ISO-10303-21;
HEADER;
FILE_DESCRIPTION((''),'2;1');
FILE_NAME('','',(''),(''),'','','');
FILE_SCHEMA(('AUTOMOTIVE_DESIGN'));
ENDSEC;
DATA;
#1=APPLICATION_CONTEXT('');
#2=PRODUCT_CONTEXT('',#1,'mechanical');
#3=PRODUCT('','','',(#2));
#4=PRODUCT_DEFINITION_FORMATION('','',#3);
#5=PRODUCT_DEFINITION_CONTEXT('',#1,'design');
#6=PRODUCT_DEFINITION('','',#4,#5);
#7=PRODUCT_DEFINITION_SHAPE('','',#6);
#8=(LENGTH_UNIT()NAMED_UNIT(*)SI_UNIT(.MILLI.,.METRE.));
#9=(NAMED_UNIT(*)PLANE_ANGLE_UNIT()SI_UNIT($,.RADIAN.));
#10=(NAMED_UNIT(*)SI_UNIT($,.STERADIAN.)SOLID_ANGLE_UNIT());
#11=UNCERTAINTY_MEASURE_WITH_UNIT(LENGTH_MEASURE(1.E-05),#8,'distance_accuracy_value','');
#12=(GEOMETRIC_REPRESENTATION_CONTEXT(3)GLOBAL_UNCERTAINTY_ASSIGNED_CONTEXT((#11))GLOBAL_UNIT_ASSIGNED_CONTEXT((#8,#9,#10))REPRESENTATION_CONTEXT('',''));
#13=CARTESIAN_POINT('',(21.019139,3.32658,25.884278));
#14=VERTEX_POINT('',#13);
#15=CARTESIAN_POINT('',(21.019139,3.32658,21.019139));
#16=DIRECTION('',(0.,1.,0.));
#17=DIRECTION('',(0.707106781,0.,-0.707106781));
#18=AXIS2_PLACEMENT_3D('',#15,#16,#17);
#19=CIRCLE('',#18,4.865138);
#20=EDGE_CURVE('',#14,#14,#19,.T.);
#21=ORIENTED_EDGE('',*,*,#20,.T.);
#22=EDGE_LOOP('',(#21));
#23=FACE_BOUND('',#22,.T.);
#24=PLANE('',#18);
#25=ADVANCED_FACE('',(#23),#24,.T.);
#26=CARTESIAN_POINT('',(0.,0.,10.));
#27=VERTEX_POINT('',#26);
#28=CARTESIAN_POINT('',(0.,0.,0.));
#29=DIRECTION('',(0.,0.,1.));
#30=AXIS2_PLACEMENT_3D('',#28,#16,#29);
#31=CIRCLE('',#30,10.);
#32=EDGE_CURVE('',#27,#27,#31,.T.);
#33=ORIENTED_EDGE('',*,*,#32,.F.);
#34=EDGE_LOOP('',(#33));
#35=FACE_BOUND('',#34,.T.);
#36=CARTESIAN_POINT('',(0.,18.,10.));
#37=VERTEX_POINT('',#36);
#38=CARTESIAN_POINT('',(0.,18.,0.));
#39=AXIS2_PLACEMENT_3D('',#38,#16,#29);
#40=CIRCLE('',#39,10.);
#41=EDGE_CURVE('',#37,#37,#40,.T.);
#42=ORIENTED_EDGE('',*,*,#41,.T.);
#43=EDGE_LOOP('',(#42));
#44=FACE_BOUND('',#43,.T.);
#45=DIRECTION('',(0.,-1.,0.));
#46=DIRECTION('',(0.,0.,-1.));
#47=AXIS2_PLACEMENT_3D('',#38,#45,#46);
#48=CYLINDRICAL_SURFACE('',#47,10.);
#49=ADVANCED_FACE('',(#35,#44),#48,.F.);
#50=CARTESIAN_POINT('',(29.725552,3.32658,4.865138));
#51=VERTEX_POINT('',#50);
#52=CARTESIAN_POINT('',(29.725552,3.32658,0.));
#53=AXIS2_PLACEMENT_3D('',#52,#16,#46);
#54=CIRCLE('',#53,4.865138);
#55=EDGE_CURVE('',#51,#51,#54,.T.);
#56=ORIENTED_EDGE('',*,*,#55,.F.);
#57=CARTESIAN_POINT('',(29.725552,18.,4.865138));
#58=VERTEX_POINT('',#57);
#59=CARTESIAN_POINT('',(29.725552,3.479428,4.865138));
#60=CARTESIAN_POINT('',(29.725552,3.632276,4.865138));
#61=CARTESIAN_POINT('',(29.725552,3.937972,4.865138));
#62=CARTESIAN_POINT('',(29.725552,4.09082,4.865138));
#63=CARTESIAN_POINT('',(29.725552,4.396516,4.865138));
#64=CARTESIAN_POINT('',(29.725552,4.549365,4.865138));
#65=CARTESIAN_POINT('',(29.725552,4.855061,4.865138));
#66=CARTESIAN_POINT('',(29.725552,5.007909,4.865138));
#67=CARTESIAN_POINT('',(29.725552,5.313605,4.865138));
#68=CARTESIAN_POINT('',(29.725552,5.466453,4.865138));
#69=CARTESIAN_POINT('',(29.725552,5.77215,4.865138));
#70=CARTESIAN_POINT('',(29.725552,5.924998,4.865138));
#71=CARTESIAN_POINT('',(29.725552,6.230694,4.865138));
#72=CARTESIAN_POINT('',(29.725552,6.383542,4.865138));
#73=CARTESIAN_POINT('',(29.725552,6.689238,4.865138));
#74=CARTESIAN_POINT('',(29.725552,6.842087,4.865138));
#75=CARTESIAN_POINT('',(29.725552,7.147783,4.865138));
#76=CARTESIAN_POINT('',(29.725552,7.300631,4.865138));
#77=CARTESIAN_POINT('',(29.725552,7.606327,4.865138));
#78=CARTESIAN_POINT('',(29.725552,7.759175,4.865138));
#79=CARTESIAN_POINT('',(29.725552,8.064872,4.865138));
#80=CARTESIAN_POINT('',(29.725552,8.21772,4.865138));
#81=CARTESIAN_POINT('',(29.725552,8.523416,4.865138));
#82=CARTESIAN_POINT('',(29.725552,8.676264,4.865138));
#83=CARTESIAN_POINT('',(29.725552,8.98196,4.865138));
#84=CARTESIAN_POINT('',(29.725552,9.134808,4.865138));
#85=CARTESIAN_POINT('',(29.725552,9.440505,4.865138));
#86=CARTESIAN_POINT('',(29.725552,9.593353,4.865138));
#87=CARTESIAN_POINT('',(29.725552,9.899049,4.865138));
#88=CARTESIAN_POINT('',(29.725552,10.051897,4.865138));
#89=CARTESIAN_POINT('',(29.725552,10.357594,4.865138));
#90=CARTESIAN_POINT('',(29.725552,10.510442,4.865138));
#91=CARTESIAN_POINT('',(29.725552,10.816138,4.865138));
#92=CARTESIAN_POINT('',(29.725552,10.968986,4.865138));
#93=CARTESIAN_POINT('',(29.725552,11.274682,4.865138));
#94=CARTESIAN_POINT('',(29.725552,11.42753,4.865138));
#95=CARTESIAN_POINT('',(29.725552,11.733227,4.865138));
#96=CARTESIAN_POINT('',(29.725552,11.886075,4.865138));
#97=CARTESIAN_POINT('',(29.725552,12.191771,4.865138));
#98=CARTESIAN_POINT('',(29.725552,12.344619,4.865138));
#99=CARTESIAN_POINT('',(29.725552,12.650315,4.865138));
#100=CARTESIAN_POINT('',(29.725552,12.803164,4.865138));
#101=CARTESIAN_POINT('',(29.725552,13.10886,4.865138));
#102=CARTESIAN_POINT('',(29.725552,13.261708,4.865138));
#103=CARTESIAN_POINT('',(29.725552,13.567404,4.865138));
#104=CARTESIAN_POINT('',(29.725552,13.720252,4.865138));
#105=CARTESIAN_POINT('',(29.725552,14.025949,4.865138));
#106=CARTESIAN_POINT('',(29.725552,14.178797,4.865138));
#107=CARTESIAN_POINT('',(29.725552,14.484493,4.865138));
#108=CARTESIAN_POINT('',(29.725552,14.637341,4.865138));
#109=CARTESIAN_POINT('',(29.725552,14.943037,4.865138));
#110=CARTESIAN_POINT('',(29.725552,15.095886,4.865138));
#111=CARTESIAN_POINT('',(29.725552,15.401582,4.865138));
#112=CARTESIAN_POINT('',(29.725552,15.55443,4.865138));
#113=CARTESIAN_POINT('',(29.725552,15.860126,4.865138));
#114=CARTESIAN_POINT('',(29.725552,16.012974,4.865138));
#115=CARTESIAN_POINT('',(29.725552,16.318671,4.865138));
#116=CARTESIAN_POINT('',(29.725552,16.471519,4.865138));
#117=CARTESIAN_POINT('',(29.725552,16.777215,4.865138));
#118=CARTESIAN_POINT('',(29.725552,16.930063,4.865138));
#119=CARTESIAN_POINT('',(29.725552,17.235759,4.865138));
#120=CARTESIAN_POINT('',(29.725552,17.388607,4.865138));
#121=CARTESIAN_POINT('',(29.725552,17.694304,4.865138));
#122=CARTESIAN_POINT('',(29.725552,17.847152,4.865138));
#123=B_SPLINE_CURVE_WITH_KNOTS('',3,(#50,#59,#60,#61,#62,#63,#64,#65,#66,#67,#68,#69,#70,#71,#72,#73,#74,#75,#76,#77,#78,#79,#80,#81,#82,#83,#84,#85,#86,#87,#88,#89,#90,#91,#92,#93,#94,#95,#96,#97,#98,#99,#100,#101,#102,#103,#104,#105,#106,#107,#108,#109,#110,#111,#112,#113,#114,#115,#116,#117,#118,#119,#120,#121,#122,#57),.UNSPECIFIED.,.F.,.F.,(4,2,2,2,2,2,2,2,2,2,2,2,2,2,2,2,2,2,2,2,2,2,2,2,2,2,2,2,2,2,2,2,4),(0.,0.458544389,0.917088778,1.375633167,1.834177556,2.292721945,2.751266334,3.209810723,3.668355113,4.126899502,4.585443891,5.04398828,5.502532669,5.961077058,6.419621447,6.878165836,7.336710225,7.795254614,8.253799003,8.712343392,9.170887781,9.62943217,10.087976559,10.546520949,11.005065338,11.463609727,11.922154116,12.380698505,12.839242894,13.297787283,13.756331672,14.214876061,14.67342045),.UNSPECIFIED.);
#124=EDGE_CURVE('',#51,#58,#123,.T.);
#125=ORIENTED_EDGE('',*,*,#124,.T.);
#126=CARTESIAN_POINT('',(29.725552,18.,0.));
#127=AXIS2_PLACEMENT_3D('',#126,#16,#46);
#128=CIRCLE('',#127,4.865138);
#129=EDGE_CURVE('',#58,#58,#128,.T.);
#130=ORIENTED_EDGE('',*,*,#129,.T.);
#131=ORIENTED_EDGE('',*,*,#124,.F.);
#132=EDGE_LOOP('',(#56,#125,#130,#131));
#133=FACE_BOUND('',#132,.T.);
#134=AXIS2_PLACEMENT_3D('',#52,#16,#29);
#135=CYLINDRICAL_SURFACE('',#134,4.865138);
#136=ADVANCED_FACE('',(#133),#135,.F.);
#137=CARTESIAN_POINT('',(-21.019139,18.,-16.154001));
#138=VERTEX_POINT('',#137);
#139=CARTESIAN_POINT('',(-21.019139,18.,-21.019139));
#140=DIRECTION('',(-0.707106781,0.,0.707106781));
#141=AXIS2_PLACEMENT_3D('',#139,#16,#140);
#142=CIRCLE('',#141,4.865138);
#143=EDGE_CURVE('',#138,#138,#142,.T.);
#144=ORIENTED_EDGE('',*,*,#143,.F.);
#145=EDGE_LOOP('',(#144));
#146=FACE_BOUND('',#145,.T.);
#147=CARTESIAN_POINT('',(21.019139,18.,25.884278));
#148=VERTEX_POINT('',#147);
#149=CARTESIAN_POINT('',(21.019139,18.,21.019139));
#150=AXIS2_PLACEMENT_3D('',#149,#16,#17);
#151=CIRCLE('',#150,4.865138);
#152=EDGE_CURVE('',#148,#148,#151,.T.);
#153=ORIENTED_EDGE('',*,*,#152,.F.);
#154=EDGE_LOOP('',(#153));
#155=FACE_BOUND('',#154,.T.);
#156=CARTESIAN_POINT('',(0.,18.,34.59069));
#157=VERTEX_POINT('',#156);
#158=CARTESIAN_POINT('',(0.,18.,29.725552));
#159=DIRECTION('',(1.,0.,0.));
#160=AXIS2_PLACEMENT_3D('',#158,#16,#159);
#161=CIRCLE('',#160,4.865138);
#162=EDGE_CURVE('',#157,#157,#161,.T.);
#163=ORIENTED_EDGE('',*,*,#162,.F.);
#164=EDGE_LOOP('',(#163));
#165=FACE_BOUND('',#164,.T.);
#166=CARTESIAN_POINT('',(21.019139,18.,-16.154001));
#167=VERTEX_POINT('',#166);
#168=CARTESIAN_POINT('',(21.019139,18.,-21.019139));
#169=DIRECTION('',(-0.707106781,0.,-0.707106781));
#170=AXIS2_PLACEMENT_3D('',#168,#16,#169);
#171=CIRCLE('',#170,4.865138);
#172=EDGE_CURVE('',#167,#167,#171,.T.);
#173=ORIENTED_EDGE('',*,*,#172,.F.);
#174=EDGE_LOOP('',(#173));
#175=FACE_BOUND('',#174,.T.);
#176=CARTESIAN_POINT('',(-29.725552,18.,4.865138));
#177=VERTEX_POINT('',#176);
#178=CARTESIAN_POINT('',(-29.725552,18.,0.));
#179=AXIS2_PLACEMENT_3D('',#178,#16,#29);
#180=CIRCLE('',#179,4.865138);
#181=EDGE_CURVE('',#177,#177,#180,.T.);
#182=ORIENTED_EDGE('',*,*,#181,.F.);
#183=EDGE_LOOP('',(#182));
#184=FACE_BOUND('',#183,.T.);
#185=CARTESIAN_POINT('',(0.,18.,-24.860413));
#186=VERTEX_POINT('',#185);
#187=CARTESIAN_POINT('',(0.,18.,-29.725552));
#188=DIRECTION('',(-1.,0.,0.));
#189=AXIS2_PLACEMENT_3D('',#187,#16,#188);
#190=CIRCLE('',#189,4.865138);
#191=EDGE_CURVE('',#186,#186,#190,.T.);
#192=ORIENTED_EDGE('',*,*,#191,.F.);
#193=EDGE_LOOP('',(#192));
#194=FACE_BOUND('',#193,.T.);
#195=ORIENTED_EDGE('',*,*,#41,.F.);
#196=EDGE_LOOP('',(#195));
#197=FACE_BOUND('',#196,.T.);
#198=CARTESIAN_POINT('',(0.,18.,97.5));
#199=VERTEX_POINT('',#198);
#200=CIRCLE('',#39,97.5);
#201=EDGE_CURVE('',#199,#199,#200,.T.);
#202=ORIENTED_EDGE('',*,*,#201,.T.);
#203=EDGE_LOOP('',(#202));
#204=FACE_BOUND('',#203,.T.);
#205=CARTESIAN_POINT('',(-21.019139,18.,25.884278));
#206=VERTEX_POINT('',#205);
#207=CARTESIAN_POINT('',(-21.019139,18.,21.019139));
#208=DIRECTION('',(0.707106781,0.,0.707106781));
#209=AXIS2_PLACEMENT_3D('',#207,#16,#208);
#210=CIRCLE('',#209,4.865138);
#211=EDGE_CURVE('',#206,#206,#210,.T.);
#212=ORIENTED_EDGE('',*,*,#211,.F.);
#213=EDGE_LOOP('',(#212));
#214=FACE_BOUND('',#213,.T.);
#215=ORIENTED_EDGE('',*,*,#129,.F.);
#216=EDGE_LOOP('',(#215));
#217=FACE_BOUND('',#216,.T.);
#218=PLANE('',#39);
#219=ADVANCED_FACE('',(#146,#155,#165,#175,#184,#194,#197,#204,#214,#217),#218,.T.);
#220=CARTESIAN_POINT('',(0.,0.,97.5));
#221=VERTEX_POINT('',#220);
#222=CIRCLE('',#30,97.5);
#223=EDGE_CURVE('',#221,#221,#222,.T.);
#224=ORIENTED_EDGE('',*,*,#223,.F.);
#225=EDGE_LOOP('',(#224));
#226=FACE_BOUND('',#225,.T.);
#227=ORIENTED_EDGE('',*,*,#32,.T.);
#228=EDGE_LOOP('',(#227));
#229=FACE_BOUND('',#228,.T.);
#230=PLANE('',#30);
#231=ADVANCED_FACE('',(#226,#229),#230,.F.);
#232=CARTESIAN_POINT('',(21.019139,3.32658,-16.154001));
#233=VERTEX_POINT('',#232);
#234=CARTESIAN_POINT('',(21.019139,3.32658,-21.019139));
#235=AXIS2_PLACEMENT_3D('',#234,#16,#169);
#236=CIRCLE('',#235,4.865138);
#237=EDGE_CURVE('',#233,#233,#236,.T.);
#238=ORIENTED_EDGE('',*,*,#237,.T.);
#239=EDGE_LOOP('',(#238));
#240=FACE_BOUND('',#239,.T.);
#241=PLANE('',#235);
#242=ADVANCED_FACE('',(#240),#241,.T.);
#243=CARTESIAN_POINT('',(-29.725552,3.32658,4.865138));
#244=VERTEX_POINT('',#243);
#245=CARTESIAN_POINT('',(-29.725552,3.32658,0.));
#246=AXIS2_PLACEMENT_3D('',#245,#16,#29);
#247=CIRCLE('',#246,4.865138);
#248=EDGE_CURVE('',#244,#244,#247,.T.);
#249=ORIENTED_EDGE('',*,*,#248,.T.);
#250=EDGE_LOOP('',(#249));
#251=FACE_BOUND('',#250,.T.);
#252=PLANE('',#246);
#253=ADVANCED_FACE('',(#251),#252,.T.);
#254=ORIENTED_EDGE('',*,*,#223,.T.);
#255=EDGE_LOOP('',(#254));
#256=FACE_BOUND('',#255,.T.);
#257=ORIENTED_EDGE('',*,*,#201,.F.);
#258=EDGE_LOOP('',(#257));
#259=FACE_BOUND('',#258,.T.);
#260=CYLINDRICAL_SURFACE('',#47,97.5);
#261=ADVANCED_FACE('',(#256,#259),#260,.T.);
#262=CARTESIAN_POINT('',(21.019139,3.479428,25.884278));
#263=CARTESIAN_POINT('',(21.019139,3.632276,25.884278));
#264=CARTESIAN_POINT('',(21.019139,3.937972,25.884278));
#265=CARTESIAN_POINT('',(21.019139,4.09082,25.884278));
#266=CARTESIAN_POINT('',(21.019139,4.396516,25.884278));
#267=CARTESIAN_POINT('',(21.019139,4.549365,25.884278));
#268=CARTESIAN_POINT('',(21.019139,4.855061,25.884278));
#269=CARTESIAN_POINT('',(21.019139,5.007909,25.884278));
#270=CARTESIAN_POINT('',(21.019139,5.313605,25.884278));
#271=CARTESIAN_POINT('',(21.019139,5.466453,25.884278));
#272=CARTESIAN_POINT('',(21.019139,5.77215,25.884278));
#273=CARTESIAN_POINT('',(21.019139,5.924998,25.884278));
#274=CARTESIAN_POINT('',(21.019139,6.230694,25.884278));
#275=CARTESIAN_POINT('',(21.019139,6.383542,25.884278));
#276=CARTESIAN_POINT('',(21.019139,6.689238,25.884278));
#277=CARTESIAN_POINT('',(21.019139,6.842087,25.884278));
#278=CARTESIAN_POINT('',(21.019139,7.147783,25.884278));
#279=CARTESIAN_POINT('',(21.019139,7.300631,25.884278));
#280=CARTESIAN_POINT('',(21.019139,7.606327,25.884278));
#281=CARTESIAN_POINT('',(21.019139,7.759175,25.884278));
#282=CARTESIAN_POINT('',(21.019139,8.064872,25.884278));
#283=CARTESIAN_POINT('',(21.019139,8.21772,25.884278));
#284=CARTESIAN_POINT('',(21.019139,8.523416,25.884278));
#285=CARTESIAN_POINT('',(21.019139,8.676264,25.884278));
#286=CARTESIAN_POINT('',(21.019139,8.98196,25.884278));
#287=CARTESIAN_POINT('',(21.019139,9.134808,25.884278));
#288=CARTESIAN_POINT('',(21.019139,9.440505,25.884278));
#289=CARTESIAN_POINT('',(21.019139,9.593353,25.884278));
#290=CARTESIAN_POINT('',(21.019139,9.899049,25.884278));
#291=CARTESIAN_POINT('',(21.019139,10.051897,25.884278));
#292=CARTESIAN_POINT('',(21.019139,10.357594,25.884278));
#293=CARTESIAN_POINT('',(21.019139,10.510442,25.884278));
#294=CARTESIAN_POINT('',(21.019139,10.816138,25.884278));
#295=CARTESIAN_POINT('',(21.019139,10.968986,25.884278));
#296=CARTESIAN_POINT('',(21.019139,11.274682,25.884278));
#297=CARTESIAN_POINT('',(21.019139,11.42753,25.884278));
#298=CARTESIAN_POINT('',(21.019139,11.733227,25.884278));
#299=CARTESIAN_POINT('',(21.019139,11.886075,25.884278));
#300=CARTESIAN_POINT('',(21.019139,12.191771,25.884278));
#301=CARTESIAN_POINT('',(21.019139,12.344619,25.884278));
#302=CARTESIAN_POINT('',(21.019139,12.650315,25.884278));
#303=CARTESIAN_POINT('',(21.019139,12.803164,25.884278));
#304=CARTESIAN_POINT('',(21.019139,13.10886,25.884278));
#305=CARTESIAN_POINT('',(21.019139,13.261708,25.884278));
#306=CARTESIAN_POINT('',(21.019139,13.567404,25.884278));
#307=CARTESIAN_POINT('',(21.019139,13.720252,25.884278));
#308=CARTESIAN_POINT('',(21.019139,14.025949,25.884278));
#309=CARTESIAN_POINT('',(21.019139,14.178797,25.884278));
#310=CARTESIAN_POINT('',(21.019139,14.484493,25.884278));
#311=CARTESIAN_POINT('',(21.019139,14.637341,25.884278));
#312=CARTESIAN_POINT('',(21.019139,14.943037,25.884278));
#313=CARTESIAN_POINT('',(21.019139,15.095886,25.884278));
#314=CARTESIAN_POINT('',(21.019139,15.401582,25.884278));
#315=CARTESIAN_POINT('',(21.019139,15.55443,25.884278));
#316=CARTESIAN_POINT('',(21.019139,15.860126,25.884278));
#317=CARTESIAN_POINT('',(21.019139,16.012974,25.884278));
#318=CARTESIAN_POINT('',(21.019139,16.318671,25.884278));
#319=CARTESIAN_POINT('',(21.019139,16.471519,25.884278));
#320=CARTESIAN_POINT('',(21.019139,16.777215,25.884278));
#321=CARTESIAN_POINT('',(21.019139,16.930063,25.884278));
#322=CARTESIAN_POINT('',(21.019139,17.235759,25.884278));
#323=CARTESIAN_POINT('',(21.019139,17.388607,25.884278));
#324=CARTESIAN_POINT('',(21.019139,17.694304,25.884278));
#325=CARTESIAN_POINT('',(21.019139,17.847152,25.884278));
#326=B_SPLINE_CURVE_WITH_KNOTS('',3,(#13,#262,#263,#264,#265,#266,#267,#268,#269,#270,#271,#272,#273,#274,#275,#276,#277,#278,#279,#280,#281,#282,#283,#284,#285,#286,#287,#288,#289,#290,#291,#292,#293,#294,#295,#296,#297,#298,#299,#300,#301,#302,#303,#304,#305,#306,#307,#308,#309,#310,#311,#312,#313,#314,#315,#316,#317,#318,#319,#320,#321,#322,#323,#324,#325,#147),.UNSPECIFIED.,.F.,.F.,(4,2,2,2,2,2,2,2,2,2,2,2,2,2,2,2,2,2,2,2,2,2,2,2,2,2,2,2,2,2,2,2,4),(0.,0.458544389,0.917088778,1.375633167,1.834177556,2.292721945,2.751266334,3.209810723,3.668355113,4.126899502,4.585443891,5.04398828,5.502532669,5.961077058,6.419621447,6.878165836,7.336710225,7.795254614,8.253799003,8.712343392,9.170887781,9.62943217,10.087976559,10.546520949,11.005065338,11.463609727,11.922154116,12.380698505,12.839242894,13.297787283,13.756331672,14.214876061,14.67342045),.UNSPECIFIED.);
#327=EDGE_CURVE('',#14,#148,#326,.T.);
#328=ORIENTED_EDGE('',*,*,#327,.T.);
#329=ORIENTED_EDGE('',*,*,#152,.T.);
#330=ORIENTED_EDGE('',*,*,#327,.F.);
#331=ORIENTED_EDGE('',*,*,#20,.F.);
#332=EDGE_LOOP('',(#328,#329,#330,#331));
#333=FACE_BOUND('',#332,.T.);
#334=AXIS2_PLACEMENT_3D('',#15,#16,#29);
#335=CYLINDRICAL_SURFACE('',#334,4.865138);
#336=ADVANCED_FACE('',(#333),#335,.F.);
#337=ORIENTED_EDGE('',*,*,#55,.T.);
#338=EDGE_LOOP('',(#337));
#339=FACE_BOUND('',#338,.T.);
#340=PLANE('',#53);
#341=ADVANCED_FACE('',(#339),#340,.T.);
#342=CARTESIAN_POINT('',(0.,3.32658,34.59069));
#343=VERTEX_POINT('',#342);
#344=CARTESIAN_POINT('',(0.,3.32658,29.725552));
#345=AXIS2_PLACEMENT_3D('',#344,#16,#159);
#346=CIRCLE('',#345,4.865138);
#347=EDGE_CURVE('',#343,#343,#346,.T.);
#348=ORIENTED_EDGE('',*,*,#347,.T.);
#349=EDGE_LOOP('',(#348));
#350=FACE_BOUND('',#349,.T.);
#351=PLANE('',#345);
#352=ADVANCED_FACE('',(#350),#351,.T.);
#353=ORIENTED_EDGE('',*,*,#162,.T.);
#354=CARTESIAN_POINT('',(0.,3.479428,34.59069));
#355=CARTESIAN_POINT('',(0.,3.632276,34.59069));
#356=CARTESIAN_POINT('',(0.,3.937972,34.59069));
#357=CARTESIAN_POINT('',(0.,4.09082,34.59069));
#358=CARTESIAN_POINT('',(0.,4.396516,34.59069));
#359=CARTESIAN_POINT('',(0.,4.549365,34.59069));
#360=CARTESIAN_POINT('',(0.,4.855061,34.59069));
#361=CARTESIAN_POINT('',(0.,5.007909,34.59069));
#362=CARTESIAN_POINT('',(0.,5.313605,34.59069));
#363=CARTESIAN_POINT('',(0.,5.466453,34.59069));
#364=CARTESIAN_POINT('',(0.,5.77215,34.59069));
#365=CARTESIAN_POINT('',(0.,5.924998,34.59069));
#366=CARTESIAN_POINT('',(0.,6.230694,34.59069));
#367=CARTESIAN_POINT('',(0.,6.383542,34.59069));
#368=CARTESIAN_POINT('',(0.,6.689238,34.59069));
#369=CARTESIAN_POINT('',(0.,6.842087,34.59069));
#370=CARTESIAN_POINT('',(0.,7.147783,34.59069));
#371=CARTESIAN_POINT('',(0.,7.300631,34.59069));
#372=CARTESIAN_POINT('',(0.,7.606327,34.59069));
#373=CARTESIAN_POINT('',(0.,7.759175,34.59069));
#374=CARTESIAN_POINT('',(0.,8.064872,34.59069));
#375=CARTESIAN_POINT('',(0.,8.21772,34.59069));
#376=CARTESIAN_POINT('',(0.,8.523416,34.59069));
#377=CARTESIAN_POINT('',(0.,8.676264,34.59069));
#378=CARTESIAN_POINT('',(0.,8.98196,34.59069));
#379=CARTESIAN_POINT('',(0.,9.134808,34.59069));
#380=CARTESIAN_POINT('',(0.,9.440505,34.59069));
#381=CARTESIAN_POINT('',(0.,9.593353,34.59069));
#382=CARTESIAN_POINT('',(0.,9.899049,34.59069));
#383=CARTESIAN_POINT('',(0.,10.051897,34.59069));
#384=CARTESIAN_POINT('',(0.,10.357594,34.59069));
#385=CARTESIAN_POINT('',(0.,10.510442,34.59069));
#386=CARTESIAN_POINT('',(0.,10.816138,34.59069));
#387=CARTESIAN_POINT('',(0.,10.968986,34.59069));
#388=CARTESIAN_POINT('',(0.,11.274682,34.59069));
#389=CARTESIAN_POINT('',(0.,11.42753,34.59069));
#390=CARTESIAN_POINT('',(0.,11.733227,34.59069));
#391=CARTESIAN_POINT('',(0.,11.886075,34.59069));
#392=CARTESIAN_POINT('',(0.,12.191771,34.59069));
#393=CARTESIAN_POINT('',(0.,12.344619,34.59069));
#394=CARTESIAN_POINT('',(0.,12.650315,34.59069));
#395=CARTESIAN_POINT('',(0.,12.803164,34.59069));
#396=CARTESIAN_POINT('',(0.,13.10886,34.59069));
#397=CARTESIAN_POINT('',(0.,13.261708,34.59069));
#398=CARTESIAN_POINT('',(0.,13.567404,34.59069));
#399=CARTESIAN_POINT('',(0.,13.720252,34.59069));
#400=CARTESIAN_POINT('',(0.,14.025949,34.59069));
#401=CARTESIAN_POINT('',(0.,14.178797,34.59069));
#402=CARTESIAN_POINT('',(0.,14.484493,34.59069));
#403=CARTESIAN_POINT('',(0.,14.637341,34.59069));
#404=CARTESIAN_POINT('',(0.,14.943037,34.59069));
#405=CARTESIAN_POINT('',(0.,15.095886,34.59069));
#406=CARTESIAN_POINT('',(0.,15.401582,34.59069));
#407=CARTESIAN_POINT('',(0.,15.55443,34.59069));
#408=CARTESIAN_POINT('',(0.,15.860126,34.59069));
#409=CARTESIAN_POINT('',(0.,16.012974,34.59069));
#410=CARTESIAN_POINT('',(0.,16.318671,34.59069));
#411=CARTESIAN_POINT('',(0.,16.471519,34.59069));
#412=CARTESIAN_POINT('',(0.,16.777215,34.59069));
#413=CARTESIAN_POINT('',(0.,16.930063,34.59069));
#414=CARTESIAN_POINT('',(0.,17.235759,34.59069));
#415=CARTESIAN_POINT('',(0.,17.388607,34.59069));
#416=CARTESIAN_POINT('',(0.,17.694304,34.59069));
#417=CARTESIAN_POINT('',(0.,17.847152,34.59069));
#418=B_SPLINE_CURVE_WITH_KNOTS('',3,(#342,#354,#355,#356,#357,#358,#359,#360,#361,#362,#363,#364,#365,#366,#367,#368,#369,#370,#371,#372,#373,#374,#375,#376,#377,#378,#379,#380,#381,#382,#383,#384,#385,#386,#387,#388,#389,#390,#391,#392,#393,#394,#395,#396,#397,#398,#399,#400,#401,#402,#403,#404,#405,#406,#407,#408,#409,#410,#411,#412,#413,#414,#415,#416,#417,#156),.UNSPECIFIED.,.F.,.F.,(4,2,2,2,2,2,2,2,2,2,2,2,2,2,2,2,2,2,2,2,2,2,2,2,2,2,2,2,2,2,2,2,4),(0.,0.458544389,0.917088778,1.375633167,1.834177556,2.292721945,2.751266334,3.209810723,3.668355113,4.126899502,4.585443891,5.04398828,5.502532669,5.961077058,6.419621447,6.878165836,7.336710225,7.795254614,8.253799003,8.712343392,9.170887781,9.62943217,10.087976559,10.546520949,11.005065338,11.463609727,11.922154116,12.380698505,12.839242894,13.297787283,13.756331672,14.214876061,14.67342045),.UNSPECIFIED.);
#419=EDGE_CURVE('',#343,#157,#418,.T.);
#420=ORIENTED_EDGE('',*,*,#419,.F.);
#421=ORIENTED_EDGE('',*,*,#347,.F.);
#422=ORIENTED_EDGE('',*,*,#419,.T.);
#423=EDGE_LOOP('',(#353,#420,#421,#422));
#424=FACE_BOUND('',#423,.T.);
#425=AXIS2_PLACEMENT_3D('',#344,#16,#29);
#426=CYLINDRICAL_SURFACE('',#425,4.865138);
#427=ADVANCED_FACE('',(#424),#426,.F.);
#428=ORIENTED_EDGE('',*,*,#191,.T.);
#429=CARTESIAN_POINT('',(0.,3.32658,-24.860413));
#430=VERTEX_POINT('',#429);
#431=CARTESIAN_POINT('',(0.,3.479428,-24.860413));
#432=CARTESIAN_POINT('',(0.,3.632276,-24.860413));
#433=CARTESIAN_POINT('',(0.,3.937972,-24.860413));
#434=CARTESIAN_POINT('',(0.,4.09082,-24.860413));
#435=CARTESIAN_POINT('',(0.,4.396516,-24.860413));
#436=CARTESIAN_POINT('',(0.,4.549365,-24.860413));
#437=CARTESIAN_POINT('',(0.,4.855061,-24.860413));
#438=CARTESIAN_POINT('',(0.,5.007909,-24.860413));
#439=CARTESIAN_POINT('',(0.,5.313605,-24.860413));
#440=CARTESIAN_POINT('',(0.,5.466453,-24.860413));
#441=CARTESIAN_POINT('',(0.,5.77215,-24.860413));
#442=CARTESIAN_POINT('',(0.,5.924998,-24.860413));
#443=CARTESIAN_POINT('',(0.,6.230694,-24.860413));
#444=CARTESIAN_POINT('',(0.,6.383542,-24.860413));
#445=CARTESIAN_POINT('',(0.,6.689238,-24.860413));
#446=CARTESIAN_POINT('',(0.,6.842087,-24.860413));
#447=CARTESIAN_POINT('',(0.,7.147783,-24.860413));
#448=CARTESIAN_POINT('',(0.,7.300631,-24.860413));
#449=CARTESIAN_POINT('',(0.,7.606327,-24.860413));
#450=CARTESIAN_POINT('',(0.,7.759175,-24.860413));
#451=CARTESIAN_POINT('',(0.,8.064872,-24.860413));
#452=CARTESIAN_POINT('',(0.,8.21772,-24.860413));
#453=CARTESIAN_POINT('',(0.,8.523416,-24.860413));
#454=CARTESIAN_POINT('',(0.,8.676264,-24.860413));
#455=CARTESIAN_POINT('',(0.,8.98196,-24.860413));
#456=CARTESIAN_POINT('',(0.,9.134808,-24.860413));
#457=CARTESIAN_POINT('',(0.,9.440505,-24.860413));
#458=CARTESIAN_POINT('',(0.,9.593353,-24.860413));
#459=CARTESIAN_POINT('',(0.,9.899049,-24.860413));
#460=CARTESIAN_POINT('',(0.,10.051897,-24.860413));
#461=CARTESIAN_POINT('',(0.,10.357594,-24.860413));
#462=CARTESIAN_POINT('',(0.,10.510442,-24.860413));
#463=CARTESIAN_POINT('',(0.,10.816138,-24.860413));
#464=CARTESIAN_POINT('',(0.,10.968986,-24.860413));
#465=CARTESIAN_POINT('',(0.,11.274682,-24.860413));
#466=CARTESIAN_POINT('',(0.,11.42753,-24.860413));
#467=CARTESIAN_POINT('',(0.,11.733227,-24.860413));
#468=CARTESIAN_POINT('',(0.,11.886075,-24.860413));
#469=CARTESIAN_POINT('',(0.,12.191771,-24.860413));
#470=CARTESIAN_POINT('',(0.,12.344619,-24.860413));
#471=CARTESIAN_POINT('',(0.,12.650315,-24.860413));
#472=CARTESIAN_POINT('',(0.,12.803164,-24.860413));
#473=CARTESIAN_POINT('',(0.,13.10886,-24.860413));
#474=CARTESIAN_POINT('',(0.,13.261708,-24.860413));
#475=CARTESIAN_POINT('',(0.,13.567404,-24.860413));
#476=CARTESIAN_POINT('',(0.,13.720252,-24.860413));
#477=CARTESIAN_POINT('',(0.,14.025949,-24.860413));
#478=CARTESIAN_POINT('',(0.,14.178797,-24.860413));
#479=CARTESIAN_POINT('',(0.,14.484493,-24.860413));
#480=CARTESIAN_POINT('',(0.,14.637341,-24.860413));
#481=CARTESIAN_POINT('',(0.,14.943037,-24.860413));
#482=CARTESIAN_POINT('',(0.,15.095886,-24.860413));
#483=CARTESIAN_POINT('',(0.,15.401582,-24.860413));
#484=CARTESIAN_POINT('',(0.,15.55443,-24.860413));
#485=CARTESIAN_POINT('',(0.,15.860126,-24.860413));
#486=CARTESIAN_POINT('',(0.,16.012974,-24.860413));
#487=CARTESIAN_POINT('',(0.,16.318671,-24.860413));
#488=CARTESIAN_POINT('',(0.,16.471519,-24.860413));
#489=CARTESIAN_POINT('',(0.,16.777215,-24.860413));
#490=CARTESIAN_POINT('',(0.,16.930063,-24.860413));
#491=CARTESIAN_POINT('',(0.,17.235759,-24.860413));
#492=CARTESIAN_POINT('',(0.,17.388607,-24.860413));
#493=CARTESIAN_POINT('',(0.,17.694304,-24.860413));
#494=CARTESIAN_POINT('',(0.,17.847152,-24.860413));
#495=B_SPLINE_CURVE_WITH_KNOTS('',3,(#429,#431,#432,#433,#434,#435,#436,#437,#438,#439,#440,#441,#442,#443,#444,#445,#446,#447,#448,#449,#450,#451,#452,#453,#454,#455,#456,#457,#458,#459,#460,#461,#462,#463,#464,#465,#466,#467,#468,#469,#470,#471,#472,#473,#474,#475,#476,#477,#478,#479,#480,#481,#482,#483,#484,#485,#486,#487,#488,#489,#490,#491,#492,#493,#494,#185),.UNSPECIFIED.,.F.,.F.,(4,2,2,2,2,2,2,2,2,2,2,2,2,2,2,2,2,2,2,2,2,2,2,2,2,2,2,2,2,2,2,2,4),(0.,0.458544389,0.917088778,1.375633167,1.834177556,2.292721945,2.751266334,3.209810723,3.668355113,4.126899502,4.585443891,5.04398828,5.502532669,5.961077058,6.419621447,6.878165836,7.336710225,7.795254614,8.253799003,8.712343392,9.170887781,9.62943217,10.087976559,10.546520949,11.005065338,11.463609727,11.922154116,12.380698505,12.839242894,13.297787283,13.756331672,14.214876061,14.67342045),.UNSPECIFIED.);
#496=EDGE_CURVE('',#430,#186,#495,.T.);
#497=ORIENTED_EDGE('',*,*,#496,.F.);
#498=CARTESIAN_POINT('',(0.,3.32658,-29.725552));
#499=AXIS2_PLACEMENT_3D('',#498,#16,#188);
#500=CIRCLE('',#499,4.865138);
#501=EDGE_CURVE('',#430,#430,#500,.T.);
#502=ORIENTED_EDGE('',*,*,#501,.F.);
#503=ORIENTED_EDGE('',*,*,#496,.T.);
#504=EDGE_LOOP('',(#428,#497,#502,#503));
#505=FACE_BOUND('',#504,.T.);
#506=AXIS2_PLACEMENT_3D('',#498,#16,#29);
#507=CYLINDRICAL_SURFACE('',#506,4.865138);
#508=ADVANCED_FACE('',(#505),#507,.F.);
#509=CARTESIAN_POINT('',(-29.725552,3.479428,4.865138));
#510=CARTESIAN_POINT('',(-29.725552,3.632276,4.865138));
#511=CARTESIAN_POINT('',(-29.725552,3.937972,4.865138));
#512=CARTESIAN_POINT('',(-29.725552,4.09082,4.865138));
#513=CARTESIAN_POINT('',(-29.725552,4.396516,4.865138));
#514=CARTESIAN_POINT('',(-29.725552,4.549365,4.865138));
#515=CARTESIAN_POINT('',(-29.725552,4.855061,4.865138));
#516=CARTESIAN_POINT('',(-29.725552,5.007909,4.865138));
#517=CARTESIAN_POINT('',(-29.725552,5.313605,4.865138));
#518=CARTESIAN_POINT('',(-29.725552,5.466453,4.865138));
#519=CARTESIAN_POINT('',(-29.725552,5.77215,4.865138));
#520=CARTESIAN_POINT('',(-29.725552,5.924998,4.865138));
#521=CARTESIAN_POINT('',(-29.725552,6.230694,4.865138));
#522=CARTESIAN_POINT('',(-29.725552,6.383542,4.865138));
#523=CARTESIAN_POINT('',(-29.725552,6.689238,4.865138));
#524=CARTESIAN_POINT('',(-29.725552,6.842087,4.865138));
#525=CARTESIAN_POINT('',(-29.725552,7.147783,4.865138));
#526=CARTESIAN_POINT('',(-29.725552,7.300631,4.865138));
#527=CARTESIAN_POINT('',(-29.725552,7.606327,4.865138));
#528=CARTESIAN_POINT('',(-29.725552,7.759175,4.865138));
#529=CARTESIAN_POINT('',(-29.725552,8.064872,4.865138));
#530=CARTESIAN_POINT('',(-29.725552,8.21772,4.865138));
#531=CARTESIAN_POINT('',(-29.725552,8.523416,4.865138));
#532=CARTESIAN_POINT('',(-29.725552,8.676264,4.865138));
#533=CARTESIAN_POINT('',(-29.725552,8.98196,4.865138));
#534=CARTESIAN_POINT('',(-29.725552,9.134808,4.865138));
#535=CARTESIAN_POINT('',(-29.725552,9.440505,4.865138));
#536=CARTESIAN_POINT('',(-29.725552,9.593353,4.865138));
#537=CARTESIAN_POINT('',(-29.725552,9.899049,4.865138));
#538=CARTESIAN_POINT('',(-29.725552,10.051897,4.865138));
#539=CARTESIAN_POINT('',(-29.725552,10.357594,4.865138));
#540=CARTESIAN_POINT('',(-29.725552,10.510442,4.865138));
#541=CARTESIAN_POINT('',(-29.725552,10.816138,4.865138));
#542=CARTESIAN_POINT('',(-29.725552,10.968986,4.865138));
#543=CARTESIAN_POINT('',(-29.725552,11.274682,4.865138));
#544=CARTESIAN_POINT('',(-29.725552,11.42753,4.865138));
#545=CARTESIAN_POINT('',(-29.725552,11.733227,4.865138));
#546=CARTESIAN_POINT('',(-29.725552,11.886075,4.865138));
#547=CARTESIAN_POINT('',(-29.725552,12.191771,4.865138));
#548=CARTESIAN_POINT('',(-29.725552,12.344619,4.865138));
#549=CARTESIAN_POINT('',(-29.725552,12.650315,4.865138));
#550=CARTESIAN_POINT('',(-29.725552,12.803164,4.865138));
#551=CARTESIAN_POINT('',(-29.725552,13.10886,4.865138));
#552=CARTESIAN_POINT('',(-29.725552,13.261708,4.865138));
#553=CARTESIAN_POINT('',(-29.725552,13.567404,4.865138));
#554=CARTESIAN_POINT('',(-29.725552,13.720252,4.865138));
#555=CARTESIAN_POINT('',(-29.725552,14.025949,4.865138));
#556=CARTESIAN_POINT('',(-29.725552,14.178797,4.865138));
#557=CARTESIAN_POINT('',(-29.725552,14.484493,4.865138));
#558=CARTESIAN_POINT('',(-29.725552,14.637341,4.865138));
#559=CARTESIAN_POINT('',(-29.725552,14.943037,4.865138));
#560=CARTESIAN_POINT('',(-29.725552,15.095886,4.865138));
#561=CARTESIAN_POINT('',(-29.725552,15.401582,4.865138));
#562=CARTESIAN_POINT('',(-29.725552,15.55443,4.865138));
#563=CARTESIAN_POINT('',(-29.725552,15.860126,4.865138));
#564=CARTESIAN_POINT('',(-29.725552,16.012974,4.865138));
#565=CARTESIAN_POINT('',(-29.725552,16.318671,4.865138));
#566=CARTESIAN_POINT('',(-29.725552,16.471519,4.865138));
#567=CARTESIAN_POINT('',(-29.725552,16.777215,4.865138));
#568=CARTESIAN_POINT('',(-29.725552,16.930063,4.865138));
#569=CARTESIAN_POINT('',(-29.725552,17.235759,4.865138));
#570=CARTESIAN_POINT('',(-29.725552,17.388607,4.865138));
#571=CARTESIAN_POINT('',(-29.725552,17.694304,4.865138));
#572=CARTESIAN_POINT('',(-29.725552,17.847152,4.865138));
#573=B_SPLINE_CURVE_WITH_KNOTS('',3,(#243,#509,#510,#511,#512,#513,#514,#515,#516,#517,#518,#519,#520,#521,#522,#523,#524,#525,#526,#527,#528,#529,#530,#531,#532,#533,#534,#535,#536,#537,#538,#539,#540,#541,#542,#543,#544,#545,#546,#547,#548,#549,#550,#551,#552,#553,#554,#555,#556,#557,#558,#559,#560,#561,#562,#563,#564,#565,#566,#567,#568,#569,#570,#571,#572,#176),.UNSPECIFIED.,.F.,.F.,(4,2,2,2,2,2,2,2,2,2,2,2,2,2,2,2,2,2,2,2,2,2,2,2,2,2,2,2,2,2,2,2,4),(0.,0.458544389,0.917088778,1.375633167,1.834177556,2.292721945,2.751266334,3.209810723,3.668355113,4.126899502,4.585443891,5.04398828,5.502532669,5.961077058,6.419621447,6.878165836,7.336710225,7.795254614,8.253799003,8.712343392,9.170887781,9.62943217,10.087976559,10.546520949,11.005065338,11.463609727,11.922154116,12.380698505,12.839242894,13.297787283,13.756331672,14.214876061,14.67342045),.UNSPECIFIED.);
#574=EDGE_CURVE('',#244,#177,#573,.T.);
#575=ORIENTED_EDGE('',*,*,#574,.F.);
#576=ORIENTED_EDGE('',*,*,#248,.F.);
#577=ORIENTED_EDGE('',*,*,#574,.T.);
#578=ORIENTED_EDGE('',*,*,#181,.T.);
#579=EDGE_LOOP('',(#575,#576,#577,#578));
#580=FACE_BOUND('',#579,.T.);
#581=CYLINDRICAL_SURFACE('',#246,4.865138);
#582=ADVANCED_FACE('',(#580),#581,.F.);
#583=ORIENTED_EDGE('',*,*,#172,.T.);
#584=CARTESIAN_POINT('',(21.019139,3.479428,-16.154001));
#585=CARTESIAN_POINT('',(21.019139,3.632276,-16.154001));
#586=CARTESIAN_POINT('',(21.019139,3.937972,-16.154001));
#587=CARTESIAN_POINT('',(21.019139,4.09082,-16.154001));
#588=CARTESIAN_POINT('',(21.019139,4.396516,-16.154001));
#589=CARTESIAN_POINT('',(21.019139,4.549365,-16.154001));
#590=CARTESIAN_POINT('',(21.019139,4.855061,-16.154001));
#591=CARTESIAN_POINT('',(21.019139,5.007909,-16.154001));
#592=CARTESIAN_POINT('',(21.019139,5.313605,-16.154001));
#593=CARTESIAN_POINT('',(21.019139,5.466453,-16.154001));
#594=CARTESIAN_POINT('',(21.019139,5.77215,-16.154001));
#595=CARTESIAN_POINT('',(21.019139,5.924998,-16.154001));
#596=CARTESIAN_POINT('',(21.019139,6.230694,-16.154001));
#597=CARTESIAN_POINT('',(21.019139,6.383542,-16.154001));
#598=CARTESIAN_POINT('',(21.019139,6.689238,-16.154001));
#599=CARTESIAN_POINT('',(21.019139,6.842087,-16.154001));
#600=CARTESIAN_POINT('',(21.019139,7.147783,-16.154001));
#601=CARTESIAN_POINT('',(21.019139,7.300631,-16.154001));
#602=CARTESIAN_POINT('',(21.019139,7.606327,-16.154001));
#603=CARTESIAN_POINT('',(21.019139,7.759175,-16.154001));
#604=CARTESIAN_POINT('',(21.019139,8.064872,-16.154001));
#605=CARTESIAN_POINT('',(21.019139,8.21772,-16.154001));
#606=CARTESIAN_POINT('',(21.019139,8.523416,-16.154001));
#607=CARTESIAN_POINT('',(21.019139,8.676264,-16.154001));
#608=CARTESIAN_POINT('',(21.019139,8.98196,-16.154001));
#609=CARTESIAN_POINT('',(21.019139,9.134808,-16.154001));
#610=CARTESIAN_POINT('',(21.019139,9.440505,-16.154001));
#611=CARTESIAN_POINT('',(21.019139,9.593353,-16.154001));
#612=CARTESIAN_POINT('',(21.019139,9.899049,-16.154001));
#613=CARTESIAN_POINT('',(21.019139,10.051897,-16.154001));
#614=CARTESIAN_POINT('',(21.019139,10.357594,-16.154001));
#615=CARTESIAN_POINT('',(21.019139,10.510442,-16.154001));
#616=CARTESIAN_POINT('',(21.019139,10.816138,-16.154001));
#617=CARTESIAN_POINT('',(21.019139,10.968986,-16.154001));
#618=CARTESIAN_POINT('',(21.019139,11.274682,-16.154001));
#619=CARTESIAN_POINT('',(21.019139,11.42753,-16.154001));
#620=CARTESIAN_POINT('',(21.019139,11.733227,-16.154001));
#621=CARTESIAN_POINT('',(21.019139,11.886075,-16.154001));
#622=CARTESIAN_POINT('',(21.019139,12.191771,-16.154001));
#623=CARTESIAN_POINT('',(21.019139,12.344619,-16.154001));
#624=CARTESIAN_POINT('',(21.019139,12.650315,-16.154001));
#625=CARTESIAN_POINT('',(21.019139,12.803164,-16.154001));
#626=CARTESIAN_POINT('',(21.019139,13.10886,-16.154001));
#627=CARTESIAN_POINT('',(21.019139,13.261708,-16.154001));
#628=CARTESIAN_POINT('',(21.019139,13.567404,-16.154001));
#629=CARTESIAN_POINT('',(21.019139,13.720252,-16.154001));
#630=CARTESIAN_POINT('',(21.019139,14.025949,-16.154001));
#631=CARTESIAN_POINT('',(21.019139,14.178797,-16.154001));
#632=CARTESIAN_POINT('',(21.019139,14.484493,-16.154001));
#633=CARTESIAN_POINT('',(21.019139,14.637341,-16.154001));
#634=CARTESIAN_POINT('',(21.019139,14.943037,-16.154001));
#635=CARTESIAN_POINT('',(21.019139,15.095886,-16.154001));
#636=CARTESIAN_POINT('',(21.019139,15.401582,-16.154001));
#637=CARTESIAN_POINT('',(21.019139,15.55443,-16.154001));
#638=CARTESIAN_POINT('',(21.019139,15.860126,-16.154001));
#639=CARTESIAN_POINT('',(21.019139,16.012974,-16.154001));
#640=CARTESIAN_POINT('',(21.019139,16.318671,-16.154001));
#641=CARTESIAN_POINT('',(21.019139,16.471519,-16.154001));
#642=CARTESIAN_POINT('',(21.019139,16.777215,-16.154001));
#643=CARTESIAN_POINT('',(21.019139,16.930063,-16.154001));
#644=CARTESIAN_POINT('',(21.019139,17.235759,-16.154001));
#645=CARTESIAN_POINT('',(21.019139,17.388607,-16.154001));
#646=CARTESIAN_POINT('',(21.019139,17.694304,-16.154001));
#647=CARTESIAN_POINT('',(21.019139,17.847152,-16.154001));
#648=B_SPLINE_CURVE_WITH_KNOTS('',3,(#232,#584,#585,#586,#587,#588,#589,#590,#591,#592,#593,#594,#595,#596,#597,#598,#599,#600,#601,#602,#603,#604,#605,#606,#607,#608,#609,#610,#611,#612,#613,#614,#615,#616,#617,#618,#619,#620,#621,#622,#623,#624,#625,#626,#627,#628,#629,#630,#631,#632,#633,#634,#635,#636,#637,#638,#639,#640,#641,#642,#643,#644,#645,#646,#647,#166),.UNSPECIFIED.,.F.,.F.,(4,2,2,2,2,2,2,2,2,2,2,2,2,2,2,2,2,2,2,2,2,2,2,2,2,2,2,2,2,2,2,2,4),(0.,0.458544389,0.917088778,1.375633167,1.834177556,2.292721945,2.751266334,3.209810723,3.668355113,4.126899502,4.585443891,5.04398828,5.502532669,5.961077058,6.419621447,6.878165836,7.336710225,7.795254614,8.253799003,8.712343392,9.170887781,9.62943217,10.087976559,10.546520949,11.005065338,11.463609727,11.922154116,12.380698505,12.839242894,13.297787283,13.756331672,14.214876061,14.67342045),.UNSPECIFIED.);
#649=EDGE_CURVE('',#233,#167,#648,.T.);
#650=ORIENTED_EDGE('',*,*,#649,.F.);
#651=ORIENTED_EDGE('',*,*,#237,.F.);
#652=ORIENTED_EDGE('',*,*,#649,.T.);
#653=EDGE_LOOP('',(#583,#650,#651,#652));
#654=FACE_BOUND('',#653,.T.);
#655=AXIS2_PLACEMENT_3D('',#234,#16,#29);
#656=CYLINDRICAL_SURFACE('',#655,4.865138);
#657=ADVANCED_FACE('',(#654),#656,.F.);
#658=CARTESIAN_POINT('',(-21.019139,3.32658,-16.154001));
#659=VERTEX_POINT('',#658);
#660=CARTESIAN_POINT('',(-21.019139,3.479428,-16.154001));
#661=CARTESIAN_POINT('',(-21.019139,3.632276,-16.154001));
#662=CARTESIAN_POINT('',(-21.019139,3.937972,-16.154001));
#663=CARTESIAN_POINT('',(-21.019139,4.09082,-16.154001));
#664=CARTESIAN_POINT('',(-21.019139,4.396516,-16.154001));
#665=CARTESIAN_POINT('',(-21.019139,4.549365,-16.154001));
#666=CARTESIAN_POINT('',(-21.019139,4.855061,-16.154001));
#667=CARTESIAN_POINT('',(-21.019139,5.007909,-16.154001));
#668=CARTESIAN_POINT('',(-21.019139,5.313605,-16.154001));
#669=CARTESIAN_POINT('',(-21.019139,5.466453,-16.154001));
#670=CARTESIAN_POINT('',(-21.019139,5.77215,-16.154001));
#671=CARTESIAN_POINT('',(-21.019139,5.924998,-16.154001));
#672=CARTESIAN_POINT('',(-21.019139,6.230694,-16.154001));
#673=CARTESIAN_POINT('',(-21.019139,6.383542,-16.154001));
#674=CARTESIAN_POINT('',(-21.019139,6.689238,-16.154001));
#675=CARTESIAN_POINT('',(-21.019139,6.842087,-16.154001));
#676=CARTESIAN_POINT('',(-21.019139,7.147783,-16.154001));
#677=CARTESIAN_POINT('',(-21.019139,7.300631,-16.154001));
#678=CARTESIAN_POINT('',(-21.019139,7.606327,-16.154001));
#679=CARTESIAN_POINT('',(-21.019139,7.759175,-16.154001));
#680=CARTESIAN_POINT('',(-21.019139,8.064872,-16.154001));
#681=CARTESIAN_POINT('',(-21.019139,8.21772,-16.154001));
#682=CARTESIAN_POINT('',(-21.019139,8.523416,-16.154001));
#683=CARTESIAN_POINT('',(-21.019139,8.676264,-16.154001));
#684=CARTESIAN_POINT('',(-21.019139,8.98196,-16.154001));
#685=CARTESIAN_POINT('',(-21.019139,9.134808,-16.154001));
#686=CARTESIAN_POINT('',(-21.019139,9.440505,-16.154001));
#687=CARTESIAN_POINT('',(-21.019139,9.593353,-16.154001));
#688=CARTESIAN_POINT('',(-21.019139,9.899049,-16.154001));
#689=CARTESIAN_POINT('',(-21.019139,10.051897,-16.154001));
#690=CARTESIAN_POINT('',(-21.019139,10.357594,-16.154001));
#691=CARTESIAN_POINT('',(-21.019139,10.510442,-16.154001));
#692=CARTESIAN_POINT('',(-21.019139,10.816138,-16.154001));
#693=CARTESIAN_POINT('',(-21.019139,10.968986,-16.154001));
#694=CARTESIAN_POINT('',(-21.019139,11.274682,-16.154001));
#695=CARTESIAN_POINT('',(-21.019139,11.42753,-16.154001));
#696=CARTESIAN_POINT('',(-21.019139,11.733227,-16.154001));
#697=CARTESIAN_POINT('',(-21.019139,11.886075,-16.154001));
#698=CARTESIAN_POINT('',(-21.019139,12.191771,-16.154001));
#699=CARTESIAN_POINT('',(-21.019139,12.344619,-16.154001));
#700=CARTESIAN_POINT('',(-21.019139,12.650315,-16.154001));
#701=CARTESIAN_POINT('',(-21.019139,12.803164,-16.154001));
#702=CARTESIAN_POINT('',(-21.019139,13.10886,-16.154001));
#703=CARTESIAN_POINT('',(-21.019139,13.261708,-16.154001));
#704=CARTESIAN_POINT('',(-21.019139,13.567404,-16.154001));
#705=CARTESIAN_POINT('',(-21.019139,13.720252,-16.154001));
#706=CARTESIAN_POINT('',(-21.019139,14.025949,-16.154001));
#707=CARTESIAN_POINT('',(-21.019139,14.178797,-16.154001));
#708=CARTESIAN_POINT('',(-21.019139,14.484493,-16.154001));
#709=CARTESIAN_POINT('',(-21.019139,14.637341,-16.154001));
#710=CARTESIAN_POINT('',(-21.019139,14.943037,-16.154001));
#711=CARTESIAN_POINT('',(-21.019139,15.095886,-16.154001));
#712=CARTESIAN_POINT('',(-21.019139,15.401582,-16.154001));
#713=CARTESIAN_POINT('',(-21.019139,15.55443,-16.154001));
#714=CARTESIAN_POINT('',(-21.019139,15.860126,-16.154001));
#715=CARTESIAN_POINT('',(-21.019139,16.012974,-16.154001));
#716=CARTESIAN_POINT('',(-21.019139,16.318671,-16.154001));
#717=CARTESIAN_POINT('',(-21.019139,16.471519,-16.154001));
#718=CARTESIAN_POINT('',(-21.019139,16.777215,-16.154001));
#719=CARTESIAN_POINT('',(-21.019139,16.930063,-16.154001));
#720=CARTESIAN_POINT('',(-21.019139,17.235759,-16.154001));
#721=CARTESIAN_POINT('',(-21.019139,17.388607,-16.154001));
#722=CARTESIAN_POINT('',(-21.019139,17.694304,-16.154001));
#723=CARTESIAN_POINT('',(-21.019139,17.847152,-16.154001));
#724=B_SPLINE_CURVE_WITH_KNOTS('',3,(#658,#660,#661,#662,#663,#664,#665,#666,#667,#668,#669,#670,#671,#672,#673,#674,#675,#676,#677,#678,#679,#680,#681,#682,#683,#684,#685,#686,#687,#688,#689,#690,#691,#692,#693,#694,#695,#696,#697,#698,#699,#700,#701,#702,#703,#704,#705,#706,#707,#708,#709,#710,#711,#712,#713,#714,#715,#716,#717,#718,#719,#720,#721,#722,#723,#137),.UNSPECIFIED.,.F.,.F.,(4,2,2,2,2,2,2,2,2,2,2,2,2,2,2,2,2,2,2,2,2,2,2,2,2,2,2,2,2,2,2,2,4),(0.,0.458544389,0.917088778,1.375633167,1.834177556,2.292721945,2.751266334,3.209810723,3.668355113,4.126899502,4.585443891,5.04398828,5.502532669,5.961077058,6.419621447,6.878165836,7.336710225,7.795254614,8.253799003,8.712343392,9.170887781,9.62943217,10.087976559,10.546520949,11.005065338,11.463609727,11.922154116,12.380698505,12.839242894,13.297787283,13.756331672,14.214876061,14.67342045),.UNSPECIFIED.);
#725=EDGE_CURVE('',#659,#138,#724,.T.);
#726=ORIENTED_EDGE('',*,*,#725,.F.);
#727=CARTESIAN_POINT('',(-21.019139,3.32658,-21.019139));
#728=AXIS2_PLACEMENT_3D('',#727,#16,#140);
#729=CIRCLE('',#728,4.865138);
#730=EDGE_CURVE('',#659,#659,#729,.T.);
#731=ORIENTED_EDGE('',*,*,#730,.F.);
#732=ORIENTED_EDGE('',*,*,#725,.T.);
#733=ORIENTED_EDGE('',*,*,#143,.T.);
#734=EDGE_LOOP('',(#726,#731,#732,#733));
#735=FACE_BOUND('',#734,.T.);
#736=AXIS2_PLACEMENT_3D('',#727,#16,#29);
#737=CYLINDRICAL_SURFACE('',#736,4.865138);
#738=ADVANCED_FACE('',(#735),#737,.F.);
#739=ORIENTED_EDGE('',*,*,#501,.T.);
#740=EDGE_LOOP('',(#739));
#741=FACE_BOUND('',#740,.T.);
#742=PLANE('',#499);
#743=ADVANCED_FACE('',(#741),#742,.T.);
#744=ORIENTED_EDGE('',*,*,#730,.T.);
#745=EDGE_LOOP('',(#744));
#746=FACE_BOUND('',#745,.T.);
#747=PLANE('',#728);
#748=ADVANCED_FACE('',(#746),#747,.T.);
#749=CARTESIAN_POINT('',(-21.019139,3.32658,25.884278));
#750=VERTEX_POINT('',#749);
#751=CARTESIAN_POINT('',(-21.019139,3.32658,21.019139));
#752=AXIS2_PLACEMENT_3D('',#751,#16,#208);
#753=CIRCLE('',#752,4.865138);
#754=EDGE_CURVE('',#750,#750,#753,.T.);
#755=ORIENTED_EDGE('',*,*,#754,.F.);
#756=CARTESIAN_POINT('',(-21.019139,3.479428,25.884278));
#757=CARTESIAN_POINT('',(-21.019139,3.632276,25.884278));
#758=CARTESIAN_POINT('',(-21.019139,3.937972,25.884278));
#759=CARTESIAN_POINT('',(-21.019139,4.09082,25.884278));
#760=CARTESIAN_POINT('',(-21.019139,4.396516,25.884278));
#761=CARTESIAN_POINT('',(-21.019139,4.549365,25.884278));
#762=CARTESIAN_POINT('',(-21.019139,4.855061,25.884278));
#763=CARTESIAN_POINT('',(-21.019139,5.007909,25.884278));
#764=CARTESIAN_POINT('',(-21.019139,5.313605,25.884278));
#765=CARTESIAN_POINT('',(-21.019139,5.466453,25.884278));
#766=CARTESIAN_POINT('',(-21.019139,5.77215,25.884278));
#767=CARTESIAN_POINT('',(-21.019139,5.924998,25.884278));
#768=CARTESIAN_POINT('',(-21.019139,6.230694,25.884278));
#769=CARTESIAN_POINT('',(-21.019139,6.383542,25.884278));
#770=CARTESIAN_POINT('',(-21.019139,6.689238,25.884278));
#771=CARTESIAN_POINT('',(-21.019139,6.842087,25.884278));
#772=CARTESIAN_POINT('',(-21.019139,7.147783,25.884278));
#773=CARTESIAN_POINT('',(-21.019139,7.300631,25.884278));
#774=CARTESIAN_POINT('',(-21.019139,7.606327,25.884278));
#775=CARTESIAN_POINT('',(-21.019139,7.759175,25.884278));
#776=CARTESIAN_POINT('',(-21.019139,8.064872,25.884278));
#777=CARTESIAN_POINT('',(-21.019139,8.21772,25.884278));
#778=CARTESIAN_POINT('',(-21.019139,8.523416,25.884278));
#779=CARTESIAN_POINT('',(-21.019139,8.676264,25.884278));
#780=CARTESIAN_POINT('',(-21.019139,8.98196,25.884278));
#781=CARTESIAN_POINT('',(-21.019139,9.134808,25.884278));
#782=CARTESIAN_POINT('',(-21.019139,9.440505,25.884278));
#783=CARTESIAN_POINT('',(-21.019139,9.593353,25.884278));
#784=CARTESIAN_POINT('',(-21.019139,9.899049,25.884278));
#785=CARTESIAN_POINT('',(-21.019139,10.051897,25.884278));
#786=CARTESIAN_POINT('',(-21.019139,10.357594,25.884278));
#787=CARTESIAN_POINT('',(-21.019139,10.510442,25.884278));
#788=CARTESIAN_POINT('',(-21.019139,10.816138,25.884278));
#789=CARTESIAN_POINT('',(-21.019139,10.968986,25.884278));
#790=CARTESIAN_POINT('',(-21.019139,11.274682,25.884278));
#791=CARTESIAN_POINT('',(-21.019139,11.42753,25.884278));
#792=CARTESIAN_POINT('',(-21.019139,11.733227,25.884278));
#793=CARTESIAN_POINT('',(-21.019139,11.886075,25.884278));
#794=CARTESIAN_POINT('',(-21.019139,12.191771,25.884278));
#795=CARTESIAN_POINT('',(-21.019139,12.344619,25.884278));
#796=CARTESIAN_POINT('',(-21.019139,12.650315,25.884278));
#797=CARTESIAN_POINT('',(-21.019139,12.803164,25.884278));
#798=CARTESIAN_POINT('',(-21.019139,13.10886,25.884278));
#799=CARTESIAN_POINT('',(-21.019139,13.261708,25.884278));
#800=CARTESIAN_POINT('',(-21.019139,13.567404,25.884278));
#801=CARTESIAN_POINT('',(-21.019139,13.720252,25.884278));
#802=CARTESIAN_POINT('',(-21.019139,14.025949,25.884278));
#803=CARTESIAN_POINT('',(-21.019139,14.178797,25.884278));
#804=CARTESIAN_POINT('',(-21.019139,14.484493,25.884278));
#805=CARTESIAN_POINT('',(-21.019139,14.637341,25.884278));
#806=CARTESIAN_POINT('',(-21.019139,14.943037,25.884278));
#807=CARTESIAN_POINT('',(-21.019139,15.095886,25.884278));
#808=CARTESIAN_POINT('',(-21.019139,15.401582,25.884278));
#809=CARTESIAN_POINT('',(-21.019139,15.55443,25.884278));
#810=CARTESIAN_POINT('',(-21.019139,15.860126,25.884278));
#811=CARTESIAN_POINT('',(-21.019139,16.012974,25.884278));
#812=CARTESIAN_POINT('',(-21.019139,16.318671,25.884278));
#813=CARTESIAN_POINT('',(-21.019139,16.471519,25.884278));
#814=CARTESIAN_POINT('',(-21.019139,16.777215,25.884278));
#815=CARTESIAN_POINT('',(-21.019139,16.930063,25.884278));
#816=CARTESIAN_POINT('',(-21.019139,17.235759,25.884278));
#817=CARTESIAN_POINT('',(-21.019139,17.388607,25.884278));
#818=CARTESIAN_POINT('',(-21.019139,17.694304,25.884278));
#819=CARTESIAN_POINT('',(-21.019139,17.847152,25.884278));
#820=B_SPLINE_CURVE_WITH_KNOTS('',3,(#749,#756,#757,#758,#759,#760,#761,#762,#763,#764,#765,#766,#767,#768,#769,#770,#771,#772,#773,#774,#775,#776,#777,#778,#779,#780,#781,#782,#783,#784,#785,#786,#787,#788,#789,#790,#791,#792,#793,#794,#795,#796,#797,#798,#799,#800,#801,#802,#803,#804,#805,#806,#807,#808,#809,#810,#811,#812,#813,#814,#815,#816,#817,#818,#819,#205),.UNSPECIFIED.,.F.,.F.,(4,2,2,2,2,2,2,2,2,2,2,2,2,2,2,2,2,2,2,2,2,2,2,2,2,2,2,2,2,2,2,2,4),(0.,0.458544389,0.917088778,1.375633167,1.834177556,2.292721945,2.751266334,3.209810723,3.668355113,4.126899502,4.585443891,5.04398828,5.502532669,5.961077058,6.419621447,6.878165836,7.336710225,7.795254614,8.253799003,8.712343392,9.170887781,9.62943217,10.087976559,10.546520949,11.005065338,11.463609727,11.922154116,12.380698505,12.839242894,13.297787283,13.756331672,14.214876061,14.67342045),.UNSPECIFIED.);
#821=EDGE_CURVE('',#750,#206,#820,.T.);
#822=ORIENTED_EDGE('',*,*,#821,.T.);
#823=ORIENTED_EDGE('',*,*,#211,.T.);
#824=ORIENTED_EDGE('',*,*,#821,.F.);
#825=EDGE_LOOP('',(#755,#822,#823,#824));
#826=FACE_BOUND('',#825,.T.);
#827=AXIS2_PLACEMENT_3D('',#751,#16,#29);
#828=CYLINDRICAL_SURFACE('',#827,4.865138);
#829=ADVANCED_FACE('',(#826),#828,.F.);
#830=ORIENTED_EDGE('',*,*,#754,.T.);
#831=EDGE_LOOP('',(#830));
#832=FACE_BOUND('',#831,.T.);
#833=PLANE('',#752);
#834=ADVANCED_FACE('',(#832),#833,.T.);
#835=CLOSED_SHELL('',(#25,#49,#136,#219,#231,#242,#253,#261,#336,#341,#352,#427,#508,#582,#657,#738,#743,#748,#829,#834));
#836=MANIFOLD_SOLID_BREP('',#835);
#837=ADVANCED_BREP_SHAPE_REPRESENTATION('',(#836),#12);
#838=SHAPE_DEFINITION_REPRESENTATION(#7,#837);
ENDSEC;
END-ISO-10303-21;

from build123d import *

# Parameters (mm, degrees)
SKETCH1_R           = 97.5
BOSS_EXTRUDE1_DEPTH = 18
SKETCH2_R           = 10
CUT_EXTRUDE1_DEPTH  = 140.055744218
SKETCH3_R           = 4.865138475
CUT_EXTRUDE2_DEPTH  = 14.67342045
CIRPATTERN1_COUNT   = 8


with BuildPart() as part:
    # Sketch1 → Boss-Extrude1 (new body)
    with BuildSketch(Plane(origin=(0, 0, 0), x_dir=(1, 0, 0), z_dir=(0, 1, 0))):
        Circle(SKETCH1_R)
    extrude(amount=BOSS_EXTRUDE1_DEPTH)

    # Sketch2 → Cut-Extrude1 (cut, through all)
    with BuildSketch(Plane(origin=(0, 0, 0), x_dir=(1, 0, 0), z_dir=(0, 1, 0))):
        Circle(SKETCH2_R)
    extrude(amount=CUT_EXTRUDE1_DEPTH, mode=Mode.SUBTRACT)

    # Sketch3 → Cut-Extrude2 (cut)
    with BuildSketch(Plane(origin=(0, 18, 0), x_dir=(1, 0, 0), z_dir=(0, 1, 0))):
        with Locations((-29.725551757, 0)):
            Circle(SKETCH3_R)
    cut_extrude2 = extrude(amount=-CUT_EXTRUDE2_DEPTH, mode=Mode.SUBTRACT)

    # CirPattern1: Cut-Extrude2 ×8 about axis
    cirpattern1_axis = Axis((0, 0, 0), (0, 1, 0))
    for i in range(1, CIRPATTERN1_COUNT):
        add(cut_extrude2.rotate(cirpattern1_axis, i * 360 / CIRPATTERN1_COUNT), mode=Mode.SUBTRACT)


solid = part.part
